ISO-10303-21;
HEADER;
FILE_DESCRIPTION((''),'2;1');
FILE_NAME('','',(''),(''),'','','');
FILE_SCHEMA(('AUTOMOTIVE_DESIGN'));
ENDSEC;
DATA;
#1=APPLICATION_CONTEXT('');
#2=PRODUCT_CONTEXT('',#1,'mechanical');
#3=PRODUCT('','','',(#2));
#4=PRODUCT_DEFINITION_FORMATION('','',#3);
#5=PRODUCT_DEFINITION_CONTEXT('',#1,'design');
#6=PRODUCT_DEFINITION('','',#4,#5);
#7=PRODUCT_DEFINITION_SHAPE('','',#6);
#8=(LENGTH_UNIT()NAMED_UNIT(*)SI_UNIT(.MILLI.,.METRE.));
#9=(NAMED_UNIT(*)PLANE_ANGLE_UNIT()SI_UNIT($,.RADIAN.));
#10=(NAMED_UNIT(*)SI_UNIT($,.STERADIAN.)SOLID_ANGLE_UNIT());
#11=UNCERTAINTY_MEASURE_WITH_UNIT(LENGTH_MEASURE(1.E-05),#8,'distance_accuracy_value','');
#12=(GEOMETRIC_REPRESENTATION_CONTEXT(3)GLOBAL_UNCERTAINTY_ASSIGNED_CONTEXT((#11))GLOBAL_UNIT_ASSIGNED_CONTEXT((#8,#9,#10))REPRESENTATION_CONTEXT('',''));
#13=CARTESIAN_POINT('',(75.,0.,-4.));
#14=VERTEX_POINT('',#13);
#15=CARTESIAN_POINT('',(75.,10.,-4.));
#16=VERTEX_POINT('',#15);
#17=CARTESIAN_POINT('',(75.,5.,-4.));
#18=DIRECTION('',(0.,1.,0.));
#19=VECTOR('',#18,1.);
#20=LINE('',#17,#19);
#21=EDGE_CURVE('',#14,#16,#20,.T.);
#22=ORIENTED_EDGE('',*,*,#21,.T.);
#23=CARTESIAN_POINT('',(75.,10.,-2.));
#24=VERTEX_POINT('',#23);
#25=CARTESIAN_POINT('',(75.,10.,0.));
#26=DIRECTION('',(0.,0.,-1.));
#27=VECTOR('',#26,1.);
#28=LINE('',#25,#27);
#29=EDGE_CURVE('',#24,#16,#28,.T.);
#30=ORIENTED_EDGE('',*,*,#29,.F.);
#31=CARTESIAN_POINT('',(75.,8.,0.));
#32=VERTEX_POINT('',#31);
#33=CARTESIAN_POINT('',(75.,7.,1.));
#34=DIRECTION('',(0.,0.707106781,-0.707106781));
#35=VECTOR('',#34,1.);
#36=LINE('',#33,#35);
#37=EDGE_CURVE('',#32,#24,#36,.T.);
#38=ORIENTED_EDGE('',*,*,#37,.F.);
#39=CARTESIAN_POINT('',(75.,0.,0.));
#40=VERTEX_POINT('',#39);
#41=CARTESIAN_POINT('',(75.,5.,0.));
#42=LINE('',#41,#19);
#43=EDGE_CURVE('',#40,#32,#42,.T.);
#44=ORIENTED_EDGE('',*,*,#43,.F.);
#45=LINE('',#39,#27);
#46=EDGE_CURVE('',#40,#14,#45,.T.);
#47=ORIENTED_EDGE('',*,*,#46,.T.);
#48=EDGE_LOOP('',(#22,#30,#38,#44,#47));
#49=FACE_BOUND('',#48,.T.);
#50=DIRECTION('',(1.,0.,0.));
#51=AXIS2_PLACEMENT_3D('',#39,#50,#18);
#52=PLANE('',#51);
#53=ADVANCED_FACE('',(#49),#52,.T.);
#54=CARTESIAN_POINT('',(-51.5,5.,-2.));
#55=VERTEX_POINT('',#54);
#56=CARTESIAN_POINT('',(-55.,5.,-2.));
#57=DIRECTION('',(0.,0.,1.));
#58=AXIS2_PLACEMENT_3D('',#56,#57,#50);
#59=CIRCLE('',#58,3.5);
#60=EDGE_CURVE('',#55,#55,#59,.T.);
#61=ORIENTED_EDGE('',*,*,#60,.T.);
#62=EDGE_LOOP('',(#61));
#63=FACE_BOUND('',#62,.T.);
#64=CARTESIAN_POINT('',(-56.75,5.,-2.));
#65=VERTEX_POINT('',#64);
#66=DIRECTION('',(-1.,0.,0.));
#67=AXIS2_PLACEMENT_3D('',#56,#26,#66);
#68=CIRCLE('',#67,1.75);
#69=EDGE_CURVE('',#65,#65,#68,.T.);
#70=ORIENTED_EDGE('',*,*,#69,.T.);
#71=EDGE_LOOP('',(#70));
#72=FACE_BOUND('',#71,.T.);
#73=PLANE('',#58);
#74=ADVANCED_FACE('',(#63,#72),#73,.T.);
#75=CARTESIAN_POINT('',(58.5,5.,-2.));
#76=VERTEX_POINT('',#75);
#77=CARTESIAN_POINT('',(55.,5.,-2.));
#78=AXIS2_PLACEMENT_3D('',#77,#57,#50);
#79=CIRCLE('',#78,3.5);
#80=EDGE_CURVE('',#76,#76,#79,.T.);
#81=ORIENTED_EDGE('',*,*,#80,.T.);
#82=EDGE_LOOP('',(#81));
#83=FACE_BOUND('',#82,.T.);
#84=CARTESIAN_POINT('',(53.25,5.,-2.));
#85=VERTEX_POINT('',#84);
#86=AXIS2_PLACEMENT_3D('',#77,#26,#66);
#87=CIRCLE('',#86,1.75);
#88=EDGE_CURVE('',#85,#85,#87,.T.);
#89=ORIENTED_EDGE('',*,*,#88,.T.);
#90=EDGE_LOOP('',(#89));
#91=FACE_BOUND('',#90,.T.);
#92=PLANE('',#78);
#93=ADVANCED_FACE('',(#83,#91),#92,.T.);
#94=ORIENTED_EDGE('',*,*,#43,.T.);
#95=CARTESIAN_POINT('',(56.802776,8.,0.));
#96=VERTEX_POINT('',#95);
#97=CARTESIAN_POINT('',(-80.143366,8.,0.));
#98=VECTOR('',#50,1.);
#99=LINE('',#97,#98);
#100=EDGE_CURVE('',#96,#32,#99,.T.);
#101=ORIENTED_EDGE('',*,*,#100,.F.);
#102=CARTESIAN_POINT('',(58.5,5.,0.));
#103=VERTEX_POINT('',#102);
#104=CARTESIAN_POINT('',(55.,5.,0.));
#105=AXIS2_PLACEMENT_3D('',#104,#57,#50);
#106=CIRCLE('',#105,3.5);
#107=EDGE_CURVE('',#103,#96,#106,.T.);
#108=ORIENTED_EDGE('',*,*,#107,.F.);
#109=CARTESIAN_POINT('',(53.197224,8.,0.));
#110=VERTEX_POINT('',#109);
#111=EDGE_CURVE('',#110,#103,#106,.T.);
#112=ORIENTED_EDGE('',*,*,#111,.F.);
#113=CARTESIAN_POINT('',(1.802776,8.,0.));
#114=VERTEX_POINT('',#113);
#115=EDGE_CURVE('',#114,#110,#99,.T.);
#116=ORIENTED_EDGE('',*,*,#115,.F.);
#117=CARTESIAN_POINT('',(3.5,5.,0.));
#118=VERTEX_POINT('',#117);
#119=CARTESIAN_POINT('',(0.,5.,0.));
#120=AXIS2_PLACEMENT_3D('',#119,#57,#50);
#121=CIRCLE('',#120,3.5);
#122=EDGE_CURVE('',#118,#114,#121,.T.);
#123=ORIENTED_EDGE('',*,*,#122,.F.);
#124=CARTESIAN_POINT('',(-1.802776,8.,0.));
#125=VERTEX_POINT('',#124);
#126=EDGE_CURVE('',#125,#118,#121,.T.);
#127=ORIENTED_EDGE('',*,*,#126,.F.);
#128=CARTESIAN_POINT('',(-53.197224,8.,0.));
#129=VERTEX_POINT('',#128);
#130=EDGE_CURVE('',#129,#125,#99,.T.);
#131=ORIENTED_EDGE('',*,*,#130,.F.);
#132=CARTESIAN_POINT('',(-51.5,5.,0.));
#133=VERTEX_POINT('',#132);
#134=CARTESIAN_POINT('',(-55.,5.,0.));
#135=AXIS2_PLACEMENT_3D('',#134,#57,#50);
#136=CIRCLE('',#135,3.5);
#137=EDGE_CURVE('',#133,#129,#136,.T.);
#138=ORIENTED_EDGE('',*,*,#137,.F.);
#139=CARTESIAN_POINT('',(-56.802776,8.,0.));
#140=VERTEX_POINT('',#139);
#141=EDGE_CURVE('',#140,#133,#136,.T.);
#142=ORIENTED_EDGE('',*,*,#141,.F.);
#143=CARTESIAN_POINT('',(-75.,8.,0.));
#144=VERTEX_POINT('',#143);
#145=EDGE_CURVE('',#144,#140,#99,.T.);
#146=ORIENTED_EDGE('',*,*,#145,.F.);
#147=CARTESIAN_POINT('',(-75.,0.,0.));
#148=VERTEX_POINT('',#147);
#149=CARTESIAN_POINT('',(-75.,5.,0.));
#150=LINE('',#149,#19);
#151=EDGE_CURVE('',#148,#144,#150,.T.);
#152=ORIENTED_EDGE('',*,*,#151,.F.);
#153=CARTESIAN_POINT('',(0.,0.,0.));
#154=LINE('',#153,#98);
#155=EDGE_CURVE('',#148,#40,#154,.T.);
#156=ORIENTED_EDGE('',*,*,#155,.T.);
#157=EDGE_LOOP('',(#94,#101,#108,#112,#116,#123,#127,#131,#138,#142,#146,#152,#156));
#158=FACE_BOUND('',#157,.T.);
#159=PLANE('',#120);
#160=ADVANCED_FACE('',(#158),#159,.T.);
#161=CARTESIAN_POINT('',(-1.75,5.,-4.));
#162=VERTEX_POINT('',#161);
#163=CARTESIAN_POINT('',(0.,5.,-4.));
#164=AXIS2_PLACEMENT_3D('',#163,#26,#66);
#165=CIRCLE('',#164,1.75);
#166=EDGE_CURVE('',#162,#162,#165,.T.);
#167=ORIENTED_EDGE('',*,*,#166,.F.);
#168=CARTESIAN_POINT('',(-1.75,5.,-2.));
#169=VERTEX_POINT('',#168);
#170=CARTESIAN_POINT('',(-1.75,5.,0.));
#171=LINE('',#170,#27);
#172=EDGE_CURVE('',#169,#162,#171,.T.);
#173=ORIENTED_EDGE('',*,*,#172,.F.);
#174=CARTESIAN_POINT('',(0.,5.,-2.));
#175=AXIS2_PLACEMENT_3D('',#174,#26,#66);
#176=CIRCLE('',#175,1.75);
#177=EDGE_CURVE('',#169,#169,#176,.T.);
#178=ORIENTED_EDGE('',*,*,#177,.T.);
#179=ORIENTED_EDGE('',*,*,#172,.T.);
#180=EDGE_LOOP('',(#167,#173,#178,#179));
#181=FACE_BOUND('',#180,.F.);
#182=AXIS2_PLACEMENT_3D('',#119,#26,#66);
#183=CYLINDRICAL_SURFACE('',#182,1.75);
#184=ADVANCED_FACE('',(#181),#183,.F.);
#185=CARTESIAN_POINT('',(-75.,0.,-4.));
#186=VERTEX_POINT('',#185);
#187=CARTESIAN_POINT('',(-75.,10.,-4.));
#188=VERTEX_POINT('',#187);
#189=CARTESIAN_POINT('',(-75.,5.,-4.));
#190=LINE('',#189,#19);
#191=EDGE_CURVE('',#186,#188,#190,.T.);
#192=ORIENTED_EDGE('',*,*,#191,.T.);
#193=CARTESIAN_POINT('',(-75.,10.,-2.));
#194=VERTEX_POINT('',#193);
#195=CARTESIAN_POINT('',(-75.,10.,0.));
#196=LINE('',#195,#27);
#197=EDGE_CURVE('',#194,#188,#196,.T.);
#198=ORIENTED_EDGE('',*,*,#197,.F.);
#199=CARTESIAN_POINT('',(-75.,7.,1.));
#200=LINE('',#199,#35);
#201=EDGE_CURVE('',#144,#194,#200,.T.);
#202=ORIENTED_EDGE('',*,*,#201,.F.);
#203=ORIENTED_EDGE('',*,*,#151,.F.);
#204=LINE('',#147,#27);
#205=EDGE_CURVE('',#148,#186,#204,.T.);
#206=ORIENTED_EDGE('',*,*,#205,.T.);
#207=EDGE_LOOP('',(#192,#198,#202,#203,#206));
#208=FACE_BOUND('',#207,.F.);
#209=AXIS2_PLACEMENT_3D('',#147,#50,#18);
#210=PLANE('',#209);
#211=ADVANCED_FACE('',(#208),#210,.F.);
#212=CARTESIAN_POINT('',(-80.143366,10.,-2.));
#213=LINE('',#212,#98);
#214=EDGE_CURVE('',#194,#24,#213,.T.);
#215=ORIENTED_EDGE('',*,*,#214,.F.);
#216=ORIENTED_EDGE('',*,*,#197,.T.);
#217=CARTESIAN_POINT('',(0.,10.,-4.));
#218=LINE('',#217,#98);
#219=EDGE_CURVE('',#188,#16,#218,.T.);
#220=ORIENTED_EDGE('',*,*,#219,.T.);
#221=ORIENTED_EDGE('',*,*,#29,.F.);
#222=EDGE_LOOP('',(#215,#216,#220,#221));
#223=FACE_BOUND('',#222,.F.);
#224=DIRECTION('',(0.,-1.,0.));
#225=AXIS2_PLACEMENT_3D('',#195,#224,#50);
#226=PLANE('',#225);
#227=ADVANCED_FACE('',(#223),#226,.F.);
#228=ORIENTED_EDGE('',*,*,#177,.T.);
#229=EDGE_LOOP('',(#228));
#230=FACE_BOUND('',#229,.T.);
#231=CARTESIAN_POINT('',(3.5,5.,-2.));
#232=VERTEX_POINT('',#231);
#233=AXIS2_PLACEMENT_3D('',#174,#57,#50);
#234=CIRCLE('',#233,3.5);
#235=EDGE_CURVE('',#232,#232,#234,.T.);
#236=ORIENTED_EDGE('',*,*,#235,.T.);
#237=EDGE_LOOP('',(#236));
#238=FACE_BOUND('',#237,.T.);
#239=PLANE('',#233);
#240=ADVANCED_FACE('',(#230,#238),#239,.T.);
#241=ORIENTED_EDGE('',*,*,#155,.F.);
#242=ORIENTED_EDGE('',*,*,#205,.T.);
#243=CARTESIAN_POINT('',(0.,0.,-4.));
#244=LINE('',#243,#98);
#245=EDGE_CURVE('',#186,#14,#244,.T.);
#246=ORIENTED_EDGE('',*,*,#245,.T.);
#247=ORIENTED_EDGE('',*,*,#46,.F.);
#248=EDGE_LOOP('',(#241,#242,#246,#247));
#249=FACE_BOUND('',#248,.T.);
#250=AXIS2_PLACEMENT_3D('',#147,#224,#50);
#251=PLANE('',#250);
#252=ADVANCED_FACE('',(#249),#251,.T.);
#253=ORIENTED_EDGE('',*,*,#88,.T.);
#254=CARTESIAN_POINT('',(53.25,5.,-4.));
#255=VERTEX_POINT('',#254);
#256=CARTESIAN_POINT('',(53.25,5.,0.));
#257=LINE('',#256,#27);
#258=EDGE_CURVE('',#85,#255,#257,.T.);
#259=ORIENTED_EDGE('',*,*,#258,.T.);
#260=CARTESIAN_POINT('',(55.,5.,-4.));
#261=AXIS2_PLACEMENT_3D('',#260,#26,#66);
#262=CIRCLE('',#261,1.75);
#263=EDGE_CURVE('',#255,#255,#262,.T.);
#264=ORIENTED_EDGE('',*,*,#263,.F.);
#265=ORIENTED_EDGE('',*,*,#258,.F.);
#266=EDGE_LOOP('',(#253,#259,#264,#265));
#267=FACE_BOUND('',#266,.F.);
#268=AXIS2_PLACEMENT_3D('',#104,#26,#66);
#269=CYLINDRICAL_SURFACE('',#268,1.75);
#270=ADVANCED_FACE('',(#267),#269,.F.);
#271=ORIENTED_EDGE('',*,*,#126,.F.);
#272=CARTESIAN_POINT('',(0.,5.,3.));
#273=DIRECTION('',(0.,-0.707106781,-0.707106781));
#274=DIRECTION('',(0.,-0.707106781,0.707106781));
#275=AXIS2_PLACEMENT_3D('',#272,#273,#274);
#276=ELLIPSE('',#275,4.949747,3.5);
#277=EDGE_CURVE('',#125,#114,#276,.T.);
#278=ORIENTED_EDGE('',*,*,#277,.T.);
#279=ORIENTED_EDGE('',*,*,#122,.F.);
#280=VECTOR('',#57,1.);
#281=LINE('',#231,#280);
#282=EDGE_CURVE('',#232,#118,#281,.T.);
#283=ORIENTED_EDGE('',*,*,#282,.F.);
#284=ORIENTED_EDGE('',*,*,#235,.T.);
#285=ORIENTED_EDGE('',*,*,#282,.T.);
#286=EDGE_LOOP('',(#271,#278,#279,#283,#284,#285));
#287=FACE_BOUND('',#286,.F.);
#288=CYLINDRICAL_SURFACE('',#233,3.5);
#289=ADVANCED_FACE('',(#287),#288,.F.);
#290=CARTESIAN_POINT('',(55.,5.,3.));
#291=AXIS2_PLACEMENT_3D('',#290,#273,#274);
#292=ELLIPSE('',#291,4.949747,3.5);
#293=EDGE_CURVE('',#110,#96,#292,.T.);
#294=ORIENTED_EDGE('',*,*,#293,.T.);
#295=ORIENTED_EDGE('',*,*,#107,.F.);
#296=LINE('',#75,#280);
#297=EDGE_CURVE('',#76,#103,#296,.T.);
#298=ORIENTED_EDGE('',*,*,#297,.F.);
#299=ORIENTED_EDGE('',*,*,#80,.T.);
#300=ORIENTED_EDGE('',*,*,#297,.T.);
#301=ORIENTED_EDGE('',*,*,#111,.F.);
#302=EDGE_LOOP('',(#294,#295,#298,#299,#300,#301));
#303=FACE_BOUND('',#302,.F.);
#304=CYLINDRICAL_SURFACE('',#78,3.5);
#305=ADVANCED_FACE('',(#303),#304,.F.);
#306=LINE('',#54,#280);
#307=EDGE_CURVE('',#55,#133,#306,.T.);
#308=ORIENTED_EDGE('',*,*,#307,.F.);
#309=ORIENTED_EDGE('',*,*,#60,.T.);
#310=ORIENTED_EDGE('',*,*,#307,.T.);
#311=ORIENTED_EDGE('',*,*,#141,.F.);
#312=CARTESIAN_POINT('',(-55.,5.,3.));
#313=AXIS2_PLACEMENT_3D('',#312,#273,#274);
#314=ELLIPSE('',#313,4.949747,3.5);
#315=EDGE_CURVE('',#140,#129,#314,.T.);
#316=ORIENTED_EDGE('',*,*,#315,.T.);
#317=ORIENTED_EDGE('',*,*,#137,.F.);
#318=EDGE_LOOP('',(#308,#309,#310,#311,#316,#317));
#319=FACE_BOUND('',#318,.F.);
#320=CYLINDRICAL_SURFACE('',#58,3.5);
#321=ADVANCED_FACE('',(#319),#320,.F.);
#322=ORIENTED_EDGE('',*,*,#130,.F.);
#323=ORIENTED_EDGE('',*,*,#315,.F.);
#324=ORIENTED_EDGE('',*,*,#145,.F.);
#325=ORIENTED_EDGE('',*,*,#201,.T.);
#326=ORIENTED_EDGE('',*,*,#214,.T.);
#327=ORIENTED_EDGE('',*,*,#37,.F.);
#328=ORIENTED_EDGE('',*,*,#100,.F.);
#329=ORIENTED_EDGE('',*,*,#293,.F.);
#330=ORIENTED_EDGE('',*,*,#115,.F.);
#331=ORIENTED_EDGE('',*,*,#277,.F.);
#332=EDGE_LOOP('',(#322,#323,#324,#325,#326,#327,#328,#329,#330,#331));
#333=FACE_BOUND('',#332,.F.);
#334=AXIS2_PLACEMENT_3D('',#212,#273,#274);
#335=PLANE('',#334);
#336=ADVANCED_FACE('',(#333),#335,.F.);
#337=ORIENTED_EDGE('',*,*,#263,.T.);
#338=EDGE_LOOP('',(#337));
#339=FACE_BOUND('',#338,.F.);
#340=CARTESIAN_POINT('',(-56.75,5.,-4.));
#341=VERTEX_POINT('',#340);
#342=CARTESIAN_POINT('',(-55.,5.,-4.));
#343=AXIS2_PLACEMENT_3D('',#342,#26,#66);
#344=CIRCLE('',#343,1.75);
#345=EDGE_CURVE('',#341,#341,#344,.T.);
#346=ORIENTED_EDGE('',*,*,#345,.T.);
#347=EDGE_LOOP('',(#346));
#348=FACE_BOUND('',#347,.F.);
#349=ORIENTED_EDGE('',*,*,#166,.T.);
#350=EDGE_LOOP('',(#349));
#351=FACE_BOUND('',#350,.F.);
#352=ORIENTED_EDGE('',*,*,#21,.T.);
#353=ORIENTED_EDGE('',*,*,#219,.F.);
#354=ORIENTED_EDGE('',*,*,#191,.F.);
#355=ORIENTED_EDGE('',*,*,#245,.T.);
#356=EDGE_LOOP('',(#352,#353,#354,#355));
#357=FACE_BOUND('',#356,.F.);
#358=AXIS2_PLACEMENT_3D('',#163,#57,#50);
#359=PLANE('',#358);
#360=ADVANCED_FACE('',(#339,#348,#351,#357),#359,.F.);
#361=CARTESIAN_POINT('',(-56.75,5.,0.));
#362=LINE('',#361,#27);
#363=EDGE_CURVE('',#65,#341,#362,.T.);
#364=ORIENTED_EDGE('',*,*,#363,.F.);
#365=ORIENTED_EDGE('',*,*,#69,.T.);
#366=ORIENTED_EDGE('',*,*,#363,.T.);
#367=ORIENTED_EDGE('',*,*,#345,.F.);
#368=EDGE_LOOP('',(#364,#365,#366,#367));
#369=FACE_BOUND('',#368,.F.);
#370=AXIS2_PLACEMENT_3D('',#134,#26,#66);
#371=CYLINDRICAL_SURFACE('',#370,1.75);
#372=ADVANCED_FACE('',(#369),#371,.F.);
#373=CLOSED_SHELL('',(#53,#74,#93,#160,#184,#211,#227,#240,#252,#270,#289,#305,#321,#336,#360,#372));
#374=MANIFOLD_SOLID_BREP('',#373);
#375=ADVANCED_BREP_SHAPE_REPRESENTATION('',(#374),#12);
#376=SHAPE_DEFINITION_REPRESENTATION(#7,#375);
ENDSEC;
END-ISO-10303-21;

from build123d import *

# Parameters (mm, degrees)
F0_W           = 150
F0_H           = 10
F1_DEPTH       = 4
F2_D           = 3.5
F2_CBORE_D     = 7
F2_CBORE_DEPTH = 2
F3_T1_DEPTH    = 160.2867319519


# Not quite as in the source:
# - a fillet or chamfer that OpenCascade refuses, or shapes differently, is made with other operations: its cross-section is extruded or revolved along the edge and cut away or added


with BuildPart() as f1:
    # F0 (on Top) → F1 (new body)
    with BuildSketch(Plane.XY):
        with Locations((0, 5)):
            Rectangle(F0_W, F0_H)
    extrude(amount=-F1_DEPTH)

    # F2 (through all)
    with Locations(Plane.XY):
        with Locations((-55, 5), (0, 5), (55, 5)):
            CounterBoreHole(F2_D / 2, F2_CBORE_D / 2, F2_CBORE_DEPTH)

    # F3: chamfer of 2 on 1 edges, made by hand

    # F3_s2 → F3_t1 (cut)
    with BuildSketch(Plane.YZ.offset(-80.1433659759)):
        Polygon((10, -2), (8, 0), (10, 0), align=None)
    extrude(amount=F3_T1_DEPTH, mode=Mode.SUBTRACT)


solid = f1.part
